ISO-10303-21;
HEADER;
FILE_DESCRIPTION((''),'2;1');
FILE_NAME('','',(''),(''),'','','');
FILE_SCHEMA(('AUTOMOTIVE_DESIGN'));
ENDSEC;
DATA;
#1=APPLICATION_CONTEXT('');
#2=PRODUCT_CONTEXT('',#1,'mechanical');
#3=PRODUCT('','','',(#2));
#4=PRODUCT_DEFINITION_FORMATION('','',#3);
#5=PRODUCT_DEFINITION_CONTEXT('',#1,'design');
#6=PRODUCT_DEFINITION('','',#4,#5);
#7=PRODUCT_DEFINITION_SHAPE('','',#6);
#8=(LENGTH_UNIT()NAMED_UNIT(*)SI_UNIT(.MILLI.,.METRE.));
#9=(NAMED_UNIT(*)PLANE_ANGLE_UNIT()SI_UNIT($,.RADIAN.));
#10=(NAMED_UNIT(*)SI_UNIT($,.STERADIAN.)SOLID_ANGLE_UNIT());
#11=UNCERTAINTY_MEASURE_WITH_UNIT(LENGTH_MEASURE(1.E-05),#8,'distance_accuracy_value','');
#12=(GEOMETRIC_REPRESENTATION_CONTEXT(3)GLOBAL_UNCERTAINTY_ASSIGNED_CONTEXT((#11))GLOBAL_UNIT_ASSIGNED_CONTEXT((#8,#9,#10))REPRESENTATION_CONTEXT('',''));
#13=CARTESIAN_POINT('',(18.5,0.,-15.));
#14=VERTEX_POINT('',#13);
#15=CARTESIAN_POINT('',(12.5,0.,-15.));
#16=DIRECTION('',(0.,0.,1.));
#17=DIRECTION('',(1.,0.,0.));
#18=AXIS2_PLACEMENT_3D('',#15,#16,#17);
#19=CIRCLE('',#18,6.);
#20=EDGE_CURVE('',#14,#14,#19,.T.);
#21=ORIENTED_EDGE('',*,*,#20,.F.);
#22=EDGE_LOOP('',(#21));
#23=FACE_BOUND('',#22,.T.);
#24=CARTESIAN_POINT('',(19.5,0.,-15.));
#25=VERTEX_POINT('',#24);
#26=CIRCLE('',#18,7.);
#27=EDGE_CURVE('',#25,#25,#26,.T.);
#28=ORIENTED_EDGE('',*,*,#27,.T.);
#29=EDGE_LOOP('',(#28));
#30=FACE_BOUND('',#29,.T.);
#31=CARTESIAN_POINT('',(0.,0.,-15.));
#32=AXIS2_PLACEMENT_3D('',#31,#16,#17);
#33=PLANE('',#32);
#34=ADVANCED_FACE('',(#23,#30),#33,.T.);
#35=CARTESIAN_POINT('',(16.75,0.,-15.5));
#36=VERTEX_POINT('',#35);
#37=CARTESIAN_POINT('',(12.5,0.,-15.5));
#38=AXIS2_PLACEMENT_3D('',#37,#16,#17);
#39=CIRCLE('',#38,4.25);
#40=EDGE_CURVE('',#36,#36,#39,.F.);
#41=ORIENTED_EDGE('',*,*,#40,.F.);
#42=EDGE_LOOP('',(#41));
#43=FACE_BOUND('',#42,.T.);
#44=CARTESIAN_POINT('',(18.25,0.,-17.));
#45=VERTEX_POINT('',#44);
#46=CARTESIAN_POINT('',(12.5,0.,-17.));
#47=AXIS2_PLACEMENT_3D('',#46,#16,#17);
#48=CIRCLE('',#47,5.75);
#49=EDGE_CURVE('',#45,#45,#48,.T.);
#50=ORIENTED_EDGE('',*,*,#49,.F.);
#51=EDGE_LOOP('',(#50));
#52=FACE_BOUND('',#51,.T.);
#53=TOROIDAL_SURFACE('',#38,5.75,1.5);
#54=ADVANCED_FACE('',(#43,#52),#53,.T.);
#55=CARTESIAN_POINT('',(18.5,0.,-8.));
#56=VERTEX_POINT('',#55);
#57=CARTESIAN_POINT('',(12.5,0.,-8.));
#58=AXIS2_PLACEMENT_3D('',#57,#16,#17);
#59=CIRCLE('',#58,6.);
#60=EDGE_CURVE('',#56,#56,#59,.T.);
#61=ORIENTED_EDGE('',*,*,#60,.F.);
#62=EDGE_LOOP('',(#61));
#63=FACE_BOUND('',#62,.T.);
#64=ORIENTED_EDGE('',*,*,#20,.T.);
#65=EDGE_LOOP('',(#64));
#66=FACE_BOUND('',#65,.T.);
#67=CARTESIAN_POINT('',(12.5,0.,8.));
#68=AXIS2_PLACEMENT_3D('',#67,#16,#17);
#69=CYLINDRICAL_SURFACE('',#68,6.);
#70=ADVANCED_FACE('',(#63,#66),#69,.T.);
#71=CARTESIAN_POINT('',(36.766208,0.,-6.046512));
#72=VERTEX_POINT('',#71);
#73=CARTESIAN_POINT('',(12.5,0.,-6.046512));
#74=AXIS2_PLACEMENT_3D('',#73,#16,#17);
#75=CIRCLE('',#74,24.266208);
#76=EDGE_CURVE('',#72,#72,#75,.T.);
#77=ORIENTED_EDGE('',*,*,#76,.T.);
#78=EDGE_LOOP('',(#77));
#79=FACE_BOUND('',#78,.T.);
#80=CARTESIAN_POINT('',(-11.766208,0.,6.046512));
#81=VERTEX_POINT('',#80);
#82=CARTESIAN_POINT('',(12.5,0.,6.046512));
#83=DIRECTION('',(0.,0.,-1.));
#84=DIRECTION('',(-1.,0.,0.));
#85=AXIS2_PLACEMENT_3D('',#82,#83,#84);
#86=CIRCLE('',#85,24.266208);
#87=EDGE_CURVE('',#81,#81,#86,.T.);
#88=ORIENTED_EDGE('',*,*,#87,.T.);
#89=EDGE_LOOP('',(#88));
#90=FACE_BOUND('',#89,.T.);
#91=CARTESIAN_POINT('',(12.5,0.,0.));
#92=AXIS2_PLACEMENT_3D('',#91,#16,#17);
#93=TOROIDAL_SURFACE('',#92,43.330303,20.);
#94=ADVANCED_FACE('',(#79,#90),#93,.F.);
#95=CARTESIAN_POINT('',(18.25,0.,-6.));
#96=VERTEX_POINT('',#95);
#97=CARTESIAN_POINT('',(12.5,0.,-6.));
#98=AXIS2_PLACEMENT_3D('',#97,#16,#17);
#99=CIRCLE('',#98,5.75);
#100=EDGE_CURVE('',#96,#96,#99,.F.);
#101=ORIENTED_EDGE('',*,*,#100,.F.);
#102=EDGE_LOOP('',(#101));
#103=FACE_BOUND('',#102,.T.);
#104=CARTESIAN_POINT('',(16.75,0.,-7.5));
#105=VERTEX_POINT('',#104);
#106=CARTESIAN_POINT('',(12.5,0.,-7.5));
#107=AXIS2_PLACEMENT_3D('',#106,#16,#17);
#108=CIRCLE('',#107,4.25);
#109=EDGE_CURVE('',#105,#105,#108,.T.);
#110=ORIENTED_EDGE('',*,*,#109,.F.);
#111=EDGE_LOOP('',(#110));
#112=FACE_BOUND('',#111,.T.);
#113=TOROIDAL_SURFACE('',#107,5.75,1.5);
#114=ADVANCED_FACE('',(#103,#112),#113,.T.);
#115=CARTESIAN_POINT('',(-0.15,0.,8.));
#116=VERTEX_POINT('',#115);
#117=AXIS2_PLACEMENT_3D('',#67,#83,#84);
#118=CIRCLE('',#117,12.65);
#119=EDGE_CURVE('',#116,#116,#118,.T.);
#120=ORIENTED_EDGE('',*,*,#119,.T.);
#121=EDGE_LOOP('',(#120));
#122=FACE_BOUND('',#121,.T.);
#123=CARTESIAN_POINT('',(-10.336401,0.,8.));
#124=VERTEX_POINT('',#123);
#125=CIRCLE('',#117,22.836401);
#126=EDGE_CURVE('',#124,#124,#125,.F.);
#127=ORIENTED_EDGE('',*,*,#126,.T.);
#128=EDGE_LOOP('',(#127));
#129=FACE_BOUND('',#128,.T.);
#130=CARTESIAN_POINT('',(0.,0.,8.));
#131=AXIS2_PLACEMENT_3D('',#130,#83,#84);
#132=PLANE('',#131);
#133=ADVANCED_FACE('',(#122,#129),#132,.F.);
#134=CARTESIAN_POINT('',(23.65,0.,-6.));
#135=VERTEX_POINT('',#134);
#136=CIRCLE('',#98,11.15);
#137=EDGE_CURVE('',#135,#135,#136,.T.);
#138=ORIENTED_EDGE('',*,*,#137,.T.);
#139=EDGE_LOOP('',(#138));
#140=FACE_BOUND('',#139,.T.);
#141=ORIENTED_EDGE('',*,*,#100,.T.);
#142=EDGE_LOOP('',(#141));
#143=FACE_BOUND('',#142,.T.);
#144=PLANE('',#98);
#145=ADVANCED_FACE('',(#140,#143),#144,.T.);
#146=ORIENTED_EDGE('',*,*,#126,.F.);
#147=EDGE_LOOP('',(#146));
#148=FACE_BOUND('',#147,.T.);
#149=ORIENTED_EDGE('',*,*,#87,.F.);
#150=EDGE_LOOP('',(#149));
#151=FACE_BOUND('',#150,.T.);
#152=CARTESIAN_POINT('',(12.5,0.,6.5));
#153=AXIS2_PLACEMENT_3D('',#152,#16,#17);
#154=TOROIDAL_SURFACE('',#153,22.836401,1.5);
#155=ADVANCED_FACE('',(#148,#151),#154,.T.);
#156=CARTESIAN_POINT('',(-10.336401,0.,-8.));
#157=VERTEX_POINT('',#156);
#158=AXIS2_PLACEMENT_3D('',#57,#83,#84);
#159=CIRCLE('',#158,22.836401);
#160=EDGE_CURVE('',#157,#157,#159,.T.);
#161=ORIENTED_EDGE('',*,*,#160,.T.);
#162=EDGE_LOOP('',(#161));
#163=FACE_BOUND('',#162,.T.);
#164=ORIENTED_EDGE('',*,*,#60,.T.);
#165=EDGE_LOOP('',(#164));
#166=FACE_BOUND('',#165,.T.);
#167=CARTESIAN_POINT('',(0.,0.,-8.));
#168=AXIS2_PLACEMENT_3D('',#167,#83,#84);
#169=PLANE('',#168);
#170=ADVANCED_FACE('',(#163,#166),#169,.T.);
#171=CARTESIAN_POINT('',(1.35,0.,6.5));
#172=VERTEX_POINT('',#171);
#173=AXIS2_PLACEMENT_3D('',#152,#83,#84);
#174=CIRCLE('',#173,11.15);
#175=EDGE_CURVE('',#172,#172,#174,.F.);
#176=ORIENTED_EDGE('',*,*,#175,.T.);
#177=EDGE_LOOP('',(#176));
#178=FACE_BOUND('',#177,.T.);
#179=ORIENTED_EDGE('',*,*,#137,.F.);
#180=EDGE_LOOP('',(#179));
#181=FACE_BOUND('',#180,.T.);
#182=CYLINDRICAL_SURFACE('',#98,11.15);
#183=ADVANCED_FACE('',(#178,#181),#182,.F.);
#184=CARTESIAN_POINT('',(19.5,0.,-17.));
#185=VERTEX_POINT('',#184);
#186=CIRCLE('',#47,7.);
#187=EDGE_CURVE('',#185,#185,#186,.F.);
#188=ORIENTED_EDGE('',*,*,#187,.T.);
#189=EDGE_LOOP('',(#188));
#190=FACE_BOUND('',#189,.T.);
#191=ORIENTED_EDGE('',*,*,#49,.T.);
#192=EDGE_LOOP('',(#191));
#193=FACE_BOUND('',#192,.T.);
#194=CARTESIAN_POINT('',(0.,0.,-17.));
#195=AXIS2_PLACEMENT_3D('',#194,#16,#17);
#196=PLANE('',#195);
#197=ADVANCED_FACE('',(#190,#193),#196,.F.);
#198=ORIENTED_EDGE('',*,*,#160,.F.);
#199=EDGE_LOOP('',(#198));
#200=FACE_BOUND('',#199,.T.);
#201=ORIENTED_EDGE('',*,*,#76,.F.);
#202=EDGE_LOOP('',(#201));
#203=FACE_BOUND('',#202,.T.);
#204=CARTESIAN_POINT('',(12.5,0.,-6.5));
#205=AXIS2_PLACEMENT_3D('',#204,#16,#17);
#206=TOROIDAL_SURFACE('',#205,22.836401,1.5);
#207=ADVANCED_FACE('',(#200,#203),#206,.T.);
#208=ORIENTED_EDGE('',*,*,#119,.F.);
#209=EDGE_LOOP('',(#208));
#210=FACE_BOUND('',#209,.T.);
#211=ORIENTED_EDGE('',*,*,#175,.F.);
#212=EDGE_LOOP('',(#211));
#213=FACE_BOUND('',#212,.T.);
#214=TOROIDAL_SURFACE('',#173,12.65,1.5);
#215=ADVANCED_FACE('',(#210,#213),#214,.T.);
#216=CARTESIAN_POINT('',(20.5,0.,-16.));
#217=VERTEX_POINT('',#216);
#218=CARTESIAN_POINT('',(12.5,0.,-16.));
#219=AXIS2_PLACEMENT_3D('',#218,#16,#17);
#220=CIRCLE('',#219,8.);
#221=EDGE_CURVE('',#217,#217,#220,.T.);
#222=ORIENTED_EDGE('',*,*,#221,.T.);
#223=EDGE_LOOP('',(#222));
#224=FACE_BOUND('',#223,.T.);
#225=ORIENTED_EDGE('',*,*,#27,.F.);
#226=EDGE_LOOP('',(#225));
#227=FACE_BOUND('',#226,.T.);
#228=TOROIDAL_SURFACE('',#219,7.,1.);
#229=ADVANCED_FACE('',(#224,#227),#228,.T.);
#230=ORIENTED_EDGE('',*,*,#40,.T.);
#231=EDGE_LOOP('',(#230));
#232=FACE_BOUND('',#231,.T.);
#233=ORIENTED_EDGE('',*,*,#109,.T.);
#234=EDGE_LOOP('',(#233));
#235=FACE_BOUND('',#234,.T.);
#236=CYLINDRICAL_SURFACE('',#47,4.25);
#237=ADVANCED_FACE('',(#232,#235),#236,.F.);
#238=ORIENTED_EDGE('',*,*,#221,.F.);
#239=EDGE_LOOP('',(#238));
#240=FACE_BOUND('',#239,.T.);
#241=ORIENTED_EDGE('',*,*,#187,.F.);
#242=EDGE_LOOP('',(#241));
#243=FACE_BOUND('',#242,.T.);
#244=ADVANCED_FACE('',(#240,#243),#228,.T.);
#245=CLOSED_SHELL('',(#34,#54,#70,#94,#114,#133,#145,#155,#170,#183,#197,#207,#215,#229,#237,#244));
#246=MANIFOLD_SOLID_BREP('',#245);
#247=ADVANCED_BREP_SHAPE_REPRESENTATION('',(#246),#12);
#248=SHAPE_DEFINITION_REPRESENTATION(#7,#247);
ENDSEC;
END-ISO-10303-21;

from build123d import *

# Parameters (mm, degrees)
SKETCH2_W          = 6
SKETCH2_H          = 7
SKETCH3_R          = 11.15
CUT_EXTRUDE1_DEPTH = 14
SKETCH8_R          = 4.25
CUT_EXTRUDE3_DEPTH = 48.193749586
FILLET1_R          = 1.5
FILLET2_R          = 1.5
FILLET5_R          = 1.5
FILLET6_R          = 1


with BuildPart() as part:
    # Sketch2 → Revolve1 (revolve)
    with BuildSketch(Plane(origin=(0, 0, 0), x_dir=(1, 0, 0), z_dir=(0, 1, 0)), mode=Mode.PRIVATE) as revolve1_sk:
        with BuildLine():
            Line((-12.5, 8), (12.5, 8))
            Line((12.5, 8), (12.5, -8))
            Line((12.5, -8), (-12.5, -8))
            ThreePointArc((-12.5, -8), (-10.83030278, 0), (-12.5, 8))
        make_face()
        with Locations((9.5, 11.5)):
            Rectangle(SKETCH2_W, SKETCH2_H)
        Polygon((6.5, 15), (12.5, 15), (12.5, 17), (4.5, 17), (4.5, 15), align=None)
    revolve(revolve1_sk.sketch.rotate(Axis((12.5, 0, 8), (0, 0, -1)), 180), axis=Axis((12.5, 0, 8), (0, 0, -1)))

    # Sketch3 → Cut-Extrude1 (cut)
    with BuildSketch(Plane.XY.offset(8)):
        with Locations((12.5, 0)):
            Circle(SKETCH3_R)
    extrude(amount=-CUT_EXTRUDE1_DEPTH, mode=Mode.SUBTRACT)

    # Sketch8 → Cut-Extrude3 (cut, through all)
    with BuildSketch(Plane.XY.offset(-6)):
        with Locations((12.5, 0)):
            Circle(SKETCH8_R)
    extrude(amount=-CUT_EXTRUDE3_DEPTH, mode=Mode.SUBTRACT)

    # Fillet1
    fillet1_edges = [part.edges().sort_by_distance(p)[0] for p in [
        (8.25, 0, -6),
    ]]
    fillet(fillet1_edges, radius=FILLET1_R)

    # Fillet2
    fillet2_edges = [part.edges().sort_by_distance(p)[0] for p in [
        (-12.5, 0, 8),
        (-12.5, 0, -8),
        (1.35, 0, 8),
    ]]
    fillet(fillet2_edges, radius=FILLET2_R)

    # Fillet5
    fillet5_edges = [part.edges().sort_by_distance(p)[0] for p in [
        (8.25, 0, -17),
    ]]
    fillet(fillet5_edges, radius=FILLET5_R)

    # Fillet6
    fillet6_edges = [part.edges().sort_by_distance(p)[0] for p in [
        (4.5, 0, -15),
        (4.5, 0, -17),
    ]]
    fillet(fillet6_edges, radius=FILLET6_R - 0.0001)  # a hair under: the kernel refuses the full size


solid = part.part
